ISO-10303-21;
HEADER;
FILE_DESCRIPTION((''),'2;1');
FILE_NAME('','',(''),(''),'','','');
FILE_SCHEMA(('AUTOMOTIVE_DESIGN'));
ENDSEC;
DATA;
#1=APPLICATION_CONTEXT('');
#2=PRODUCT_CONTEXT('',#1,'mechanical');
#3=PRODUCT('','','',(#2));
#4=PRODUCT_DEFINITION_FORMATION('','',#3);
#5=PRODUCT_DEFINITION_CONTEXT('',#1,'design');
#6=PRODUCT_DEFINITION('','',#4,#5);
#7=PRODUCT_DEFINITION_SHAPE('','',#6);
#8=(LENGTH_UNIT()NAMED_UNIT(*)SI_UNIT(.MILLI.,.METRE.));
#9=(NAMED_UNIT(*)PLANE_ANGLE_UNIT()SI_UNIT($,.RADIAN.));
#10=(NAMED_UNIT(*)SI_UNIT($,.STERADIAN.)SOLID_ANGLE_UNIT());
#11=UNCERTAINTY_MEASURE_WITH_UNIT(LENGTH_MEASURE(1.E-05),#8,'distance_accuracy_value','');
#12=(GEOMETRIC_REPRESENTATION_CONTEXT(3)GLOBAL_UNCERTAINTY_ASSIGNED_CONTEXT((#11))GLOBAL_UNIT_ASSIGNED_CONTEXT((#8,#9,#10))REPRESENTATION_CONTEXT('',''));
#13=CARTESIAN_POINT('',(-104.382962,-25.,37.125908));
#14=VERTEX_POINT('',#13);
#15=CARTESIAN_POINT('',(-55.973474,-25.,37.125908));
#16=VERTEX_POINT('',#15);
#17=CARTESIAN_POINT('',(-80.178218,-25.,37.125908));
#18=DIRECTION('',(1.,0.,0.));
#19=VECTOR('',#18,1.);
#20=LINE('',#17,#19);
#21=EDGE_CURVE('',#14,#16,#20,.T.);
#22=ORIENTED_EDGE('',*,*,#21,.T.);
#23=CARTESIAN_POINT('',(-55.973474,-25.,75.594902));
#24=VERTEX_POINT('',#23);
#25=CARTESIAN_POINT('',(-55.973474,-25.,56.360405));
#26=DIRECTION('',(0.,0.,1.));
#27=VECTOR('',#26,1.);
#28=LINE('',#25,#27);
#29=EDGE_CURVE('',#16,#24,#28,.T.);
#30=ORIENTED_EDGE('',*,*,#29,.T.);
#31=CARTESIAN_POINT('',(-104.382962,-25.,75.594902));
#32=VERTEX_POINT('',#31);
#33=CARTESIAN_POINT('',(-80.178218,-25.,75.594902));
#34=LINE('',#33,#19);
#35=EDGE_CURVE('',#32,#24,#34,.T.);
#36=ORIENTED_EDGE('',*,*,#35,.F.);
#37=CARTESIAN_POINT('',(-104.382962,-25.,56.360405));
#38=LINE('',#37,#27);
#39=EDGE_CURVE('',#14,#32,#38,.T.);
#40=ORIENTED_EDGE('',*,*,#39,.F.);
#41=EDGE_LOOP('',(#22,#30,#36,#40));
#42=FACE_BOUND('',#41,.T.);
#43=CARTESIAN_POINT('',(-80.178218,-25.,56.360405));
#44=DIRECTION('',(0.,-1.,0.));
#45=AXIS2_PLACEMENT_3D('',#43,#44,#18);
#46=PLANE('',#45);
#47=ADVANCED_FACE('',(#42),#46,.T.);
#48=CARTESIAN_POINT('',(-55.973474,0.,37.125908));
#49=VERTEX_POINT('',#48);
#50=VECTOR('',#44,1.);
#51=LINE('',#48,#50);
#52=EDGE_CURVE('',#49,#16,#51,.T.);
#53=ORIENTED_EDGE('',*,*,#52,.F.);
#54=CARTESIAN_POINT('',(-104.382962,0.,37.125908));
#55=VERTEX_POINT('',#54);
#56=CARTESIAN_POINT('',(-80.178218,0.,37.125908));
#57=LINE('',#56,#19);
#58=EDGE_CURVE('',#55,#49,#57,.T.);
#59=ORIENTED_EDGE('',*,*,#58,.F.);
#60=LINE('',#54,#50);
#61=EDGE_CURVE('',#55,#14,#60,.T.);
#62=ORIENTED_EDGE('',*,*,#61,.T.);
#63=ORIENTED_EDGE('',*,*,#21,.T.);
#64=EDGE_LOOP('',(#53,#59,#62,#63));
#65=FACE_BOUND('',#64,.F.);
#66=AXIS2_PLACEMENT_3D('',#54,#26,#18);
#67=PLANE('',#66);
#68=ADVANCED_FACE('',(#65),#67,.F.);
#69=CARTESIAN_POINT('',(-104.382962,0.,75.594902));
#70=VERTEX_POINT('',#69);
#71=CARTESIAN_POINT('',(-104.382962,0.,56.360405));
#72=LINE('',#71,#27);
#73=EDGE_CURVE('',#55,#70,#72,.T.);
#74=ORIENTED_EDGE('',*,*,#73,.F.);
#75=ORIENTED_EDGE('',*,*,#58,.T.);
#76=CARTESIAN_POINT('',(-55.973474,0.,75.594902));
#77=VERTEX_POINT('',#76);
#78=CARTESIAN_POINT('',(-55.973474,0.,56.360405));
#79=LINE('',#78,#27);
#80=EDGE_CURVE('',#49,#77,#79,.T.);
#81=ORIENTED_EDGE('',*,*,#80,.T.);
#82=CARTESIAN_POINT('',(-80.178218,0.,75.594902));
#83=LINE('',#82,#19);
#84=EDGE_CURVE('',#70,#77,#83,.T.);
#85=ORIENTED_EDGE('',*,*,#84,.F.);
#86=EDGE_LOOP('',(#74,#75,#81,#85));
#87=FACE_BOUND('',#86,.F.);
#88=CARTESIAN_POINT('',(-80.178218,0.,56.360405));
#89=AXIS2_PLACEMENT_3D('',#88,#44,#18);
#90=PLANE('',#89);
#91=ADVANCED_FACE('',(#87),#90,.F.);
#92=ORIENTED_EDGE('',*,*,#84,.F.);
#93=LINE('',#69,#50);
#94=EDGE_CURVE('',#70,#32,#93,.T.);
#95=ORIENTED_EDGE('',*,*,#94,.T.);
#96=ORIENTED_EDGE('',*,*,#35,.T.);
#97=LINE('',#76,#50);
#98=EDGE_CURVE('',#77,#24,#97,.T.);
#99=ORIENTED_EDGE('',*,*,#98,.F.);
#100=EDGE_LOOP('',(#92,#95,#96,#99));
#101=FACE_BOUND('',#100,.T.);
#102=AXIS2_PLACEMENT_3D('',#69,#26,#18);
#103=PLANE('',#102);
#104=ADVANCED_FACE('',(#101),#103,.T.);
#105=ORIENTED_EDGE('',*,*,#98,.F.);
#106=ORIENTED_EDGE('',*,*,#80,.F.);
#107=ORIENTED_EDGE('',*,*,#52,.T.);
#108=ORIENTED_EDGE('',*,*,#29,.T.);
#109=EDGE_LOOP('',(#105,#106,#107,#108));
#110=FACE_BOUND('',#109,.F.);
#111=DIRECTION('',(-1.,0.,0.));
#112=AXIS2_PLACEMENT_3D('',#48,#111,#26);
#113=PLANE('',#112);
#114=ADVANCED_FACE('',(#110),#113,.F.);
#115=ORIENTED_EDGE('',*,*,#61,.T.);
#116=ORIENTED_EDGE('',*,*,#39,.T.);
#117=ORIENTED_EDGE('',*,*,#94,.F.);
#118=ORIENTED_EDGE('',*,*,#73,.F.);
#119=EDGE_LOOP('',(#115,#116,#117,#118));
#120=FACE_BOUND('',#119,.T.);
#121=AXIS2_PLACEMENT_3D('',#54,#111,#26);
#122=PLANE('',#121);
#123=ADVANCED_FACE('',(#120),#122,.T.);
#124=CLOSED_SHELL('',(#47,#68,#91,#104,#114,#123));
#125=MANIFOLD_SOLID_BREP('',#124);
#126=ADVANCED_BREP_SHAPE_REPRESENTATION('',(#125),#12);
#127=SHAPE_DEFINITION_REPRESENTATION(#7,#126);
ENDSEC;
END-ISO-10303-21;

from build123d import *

# Parameters (mm, degrees)
F0_W     = 48.4094880521
F0_H     = 38.4689942002
F1_DEPTH = 25


# Not quite as in the source:
# - a feature of the source that left no trace in its solid (it failed there, or was rolled back) is left out


with BuildPart() as f1:
    # F0 (on Front) → F1 (new body)
    with BuildSketch(Plane.XZ):
        with Locations((-80.1782179624, 56.3604049385)):
            Rectangle(F0_W, F0_H)
    extrude(amount=F1_DEPTH)


solid = f1.part
